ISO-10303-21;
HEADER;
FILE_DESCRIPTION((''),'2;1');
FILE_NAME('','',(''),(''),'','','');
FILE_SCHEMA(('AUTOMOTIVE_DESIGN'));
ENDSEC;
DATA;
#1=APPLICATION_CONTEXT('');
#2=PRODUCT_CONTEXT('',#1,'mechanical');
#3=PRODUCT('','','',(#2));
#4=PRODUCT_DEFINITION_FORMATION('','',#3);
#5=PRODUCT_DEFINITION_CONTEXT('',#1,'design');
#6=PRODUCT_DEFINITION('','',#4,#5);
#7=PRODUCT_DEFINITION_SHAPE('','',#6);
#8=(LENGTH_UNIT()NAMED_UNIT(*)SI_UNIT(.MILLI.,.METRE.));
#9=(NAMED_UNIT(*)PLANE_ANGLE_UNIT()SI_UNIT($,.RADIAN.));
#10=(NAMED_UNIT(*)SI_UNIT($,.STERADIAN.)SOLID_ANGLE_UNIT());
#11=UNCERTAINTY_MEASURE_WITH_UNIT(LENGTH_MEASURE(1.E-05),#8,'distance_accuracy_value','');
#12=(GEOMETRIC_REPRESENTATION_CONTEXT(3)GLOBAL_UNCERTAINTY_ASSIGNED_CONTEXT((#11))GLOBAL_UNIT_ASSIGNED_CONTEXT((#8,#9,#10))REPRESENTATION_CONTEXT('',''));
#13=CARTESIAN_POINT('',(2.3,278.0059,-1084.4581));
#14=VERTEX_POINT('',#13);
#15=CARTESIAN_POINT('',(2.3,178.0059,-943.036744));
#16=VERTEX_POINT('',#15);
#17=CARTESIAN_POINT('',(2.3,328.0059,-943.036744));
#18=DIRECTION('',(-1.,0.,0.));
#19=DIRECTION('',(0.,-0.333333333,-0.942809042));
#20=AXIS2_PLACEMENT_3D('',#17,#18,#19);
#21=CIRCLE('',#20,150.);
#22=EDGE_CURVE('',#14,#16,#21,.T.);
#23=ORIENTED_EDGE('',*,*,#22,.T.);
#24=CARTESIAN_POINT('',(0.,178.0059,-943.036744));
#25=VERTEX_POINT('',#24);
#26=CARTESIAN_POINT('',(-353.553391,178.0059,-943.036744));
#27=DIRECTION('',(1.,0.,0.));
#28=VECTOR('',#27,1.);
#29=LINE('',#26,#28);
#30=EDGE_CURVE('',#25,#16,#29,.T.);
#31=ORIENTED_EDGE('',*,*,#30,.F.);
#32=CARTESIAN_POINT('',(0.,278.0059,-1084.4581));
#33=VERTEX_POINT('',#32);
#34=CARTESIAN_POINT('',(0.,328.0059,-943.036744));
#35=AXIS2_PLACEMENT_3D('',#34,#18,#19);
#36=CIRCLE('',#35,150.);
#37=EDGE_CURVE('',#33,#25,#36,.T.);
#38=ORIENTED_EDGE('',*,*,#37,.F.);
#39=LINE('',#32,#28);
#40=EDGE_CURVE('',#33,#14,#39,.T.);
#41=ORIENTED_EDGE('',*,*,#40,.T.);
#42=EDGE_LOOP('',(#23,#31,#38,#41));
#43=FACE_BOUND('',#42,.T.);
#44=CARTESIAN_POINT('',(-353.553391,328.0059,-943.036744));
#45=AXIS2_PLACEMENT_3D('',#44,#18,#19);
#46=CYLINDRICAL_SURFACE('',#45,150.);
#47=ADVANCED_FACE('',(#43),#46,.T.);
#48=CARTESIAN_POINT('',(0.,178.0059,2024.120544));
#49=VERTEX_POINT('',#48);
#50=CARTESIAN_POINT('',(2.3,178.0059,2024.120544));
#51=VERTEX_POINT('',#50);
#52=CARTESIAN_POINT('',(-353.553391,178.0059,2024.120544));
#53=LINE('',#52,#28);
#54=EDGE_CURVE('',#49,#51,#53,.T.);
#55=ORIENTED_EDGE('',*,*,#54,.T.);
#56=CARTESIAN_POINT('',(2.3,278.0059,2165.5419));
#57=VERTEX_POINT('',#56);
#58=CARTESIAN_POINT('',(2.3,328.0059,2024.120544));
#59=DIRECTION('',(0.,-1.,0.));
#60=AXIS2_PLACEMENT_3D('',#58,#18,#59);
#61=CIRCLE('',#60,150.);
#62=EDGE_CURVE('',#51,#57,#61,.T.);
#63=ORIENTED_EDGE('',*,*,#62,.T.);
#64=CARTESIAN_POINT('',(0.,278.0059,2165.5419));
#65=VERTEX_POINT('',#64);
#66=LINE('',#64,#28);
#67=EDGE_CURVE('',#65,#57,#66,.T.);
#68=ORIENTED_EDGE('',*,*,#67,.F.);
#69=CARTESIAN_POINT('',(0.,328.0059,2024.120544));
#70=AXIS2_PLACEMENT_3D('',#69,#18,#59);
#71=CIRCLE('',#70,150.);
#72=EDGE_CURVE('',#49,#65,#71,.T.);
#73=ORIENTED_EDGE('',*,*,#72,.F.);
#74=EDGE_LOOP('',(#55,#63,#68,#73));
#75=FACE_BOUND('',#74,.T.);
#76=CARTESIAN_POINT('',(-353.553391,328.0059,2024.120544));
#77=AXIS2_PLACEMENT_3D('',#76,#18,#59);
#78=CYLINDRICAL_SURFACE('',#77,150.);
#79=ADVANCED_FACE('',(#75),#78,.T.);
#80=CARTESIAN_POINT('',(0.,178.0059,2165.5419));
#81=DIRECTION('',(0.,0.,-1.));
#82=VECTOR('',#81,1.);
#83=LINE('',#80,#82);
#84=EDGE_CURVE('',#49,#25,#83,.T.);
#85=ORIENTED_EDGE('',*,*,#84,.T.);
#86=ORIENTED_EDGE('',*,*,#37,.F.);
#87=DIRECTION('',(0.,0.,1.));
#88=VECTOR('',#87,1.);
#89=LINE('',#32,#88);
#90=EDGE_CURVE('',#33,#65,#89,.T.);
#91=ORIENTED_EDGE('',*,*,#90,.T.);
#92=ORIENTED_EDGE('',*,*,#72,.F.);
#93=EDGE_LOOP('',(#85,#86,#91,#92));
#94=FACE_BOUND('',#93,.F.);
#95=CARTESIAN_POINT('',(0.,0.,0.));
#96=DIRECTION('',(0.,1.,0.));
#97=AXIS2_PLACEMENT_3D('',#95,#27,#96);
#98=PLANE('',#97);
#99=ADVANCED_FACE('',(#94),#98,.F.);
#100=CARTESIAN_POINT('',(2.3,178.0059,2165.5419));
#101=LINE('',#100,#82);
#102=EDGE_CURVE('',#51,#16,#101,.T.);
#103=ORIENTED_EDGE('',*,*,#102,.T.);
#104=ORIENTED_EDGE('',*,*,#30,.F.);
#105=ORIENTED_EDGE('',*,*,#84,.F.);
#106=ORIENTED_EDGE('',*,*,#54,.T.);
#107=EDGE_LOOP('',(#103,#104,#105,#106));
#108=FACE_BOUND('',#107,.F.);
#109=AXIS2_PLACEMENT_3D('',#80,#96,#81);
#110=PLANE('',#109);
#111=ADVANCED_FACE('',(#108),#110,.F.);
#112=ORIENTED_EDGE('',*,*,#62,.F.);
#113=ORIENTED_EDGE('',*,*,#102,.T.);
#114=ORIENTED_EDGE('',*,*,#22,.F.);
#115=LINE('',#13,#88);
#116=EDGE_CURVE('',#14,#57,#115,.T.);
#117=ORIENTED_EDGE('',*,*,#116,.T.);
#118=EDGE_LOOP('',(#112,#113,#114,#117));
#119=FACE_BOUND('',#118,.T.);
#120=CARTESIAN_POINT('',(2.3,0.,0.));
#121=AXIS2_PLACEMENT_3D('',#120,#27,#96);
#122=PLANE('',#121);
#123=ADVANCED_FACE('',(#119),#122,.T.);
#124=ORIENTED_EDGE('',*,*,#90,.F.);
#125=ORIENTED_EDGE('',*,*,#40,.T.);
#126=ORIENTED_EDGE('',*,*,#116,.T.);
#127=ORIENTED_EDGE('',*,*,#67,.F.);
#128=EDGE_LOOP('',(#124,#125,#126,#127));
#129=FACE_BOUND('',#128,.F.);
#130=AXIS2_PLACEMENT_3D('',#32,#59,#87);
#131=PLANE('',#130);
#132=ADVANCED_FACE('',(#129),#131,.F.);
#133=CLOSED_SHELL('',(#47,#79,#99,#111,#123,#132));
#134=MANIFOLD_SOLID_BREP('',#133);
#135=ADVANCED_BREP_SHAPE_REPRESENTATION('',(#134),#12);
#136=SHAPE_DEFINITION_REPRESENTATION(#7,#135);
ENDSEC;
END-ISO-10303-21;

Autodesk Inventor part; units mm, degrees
ref_plane "YZ Plane" through (0, 0, 0) normal (1, 0, 0) x (0, 1, 0)
ref_plane "XZ Plane" through (0, 0, 0) normal (0, 1, 0) x (-1, 0, 0)
ref_plane "XY Plane" through (0, 0, 0) normal (0, 0, 1) x (1, 0, 0)
sketch "Sketch1" plane through (0, 0, 0) normal (1, 0, 0) x (0, 1, 0)
  line L0 (278.0059, 2165.5419) -> (178.0059, 2165.5419)
  line L1 (178.0059, 2165.5419) -> (178.0059, -1084.4581)
  line L2 (178.0059, -1084.4581) -> (278.0059, -1084.4581)
  line L3 (278.0059, -1084.4581) -> (278.0059, 2165.5419)
  dimension "d9" = 100
  dimension "d10" = 3250
extrude "Plate1" add sketch "Sketch1" along normal blind 2.3
fillet "Fillet1" radius 150 2 edges at (1.15, 178.0059, 2165.5419) (1.15, 178.0059, -1084.4581)
equation "\"d11\" = Thickness"
equation "\"BendRadius\" = Thickness"
equation "\"BendReliefWidth\" = Thickness"
equation "\"BendReliefDepth\" = 0.5 * Thickness"
equation "\"CornerReliefSize\" = 4 * Thickness"
equation "\"MinimumRemnant\" = 2 * Thickness"
equation "\"TransitionRadius\" = BendRadius"
equation "\"JacobiRadiusSize\" = BendRadius"
equation "\"GapSize\" = Thickness"
equation "\"Thickness\" = 2.3"
properties part number "Floor Frame" material "Aluminum 6061"
